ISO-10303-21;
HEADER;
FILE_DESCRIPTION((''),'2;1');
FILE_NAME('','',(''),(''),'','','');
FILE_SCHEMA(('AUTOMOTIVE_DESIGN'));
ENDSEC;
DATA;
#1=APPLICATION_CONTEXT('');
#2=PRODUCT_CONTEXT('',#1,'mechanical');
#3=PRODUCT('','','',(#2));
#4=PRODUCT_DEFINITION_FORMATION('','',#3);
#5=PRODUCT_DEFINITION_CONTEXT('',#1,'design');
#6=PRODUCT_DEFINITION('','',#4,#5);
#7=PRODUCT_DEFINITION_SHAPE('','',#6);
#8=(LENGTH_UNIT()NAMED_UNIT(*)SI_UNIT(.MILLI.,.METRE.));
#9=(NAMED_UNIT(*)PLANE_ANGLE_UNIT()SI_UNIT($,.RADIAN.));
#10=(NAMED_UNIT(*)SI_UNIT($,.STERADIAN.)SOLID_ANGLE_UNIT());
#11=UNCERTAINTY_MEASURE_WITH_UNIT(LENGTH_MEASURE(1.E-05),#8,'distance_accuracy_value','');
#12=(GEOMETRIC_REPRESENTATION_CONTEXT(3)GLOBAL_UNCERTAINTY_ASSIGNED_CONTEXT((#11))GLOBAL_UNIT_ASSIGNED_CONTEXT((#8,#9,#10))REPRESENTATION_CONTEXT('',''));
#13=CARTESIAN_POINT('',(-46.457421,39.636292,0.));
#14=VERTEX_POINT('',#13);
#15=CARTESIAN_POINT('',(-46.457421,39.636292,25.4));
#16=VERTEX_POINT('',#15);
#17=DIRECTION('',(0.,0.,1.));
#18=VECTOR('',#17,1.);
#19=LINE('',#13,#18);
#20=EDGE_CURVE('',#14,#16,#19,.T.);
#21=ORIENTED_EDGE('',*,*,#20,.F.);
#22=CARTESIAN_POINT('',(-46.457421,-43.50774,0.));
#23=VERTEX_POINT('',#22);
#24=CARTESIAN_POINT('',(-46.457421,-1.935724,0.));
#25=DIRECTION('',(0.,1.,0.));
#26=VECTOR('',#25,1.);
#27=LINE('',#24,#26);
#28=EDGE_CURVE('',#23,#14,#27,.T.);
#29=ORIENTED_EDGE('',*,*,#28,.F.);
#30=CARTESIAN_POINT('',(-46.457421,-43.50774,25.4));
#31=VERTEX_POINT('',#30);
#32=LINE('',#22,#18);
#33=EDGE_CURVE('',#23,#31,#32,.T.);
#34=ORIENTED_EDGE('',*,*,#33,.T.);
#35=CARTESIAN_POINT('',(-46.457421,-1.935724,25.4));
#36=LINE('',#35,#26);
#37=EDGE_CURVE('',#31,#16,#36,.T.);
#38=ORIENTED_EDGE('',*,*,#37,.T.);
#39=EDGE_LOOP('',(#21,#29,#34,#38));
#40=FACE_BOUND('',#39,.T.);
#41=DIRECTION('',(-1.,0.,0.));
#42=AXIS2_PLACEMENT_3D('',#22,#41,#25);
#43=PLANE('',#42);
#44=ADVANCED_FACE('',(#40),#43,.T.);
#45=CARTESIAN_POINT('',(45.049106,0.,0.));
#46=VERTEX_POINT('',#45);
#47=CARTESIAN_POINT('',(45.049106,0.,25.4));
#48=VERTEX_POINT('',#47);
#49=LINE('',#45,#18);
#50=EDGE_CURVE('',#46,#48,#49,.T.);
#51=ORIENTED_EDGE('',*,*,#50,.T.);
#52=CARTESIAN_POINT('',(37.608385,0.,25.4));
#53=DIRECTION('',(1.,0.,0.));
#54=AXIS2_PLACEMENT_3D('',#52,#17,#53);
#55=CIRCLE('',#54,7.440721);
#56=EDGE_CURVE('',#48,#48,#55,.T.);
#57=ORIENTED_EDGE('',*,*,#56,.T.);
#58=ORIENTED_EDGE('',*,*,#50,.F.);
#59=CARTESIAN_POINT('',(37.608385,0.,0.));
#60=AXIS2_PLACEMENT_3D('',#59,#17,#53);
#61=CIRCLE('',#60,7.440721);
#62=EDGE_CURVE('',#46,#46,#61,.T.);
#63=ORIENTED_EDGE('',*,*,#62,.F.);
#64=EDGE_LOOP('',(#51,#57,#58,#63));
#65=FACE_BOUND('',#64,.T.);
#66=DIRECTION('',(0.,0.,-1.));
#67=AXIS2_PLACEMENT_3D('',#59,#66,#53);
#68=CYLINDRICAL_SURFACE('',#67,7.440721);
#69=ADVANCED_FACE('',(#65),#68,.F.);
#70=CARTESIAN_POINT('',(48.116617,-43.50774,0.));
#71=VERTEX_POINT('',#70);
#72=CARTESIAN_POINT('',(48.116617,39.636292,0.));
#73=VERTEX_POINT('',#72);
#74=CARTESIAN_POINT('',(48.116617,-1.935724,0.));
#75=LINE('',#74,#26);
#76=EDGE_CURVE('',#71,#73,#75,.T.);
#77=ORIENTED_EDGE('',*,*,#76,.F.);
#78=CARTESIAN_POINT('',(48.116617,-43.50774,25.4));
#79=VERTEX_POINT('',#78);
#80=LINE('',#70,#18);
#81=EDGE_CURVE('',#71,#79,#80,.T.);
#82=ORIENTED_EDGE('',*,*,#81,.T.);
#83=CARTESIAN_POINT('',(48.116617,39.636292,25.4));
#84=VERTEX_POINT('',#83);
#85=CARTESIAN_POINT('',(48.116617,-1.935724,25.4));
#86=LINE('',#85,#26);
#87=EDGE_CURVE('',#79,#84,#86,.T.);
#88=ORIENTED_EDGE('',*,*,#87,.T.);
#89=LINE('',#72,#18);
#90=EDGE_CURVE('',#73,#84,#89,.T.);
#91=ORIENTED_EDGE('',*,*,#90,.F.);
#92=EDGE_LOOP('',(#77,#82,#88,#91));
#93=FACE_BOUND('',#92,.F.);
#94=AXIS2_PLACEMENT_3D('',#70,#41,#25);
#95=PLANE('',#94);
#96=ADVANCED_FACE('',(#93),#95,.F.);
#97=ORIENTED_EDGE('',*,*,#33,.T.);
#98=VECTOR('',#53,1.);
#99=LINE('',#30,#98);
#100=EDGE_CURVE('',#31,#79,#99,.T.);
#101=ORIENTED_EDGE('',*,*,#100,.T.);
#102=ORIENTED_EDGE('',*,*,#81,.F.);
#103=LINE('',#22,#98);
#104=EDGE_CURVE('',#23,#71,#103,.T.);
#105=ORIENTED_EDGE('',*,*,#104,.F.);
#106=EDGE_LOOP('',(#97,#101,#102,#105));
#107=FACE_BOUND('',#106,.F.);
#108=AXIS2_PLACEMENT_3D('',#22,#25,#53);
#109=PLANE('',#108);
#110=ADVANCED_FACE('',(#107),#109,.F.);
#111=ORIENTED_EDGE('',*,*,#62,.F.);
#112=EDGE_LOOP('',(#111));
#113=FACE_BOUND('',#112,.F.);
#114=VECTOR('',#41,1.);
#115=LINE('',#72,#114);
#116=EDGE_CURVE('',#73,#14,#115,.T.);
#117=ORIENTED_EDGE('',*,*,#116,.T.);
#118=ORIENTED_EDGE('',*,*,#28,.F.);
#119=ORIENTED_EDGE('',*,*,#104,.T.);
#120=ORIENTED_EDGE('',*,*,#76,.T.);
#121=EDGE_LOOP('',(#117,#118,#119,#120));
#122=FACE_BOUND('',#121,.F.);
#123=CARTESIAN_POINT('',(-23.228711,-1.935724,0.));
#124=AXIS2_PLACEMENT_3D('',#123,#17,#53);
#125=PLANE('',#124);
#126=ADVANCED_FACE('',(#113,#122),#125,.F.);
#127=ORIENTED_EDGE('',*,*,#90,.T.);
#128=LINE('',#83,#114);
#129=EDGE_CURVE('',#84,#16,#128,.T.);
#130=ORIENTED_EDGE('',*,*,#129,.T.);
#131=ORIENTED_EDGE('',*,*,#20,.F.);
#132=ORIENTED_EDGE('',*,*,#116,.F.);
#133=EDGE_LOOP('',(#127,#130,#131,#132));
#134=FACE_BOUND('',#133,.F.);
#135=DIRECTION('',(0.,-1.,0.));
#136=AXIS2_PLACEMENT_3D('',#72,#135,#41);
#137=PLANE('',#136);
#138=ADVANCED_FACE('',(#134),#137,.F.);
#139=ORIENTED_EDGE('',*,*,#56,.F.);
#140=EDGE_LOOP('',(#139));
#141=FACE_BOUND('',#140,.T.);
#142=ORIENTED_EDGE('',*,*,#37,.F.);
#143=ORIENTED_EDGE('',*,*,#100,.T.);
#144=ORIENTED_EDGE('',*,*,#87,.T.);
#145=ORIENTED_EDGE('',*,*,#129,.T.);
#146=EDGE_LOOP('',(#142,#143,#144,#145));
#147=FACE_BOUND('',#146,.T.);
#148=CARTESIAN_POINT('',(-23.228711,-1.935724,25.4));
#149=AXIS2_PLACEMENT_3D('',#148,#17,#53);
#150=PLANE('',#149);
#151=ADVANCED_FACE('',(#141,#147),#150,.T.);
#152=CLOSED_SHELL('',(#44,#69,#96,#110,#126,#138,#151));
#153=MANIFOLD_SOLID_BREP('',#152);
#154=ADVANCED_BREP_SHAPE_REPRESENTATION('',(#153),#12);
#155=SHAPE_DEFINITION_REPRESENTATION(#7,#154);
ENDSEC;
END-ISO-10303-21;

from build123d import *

# Parameters (mm, degrees)
F0_W     = 46.4574210346
F0_H     = 83.1440314651
F0_W_2   = 48.1166169047
F0_R     = 7.4407213522
F1_DEPTH = 25.4


with BuildPart() as f1:
    # F0 (on Top) → F1 (new body)
    with BuildSketch(Plane.XY):
        with Locations((-23.2287105173, -1.935724169)):
            Rectangle(F0_W, F0_H)
        with Locations((24.0583084524, -1.935724169)):
            Rectangle(F0_W_2, F0_H)
        with Locations((37.6083850861, 0)):
            Circle(F0_R, mode=Mode.SUBTRACT)
    extrude(amount=F1_DEPTH)


solid = f1.part
